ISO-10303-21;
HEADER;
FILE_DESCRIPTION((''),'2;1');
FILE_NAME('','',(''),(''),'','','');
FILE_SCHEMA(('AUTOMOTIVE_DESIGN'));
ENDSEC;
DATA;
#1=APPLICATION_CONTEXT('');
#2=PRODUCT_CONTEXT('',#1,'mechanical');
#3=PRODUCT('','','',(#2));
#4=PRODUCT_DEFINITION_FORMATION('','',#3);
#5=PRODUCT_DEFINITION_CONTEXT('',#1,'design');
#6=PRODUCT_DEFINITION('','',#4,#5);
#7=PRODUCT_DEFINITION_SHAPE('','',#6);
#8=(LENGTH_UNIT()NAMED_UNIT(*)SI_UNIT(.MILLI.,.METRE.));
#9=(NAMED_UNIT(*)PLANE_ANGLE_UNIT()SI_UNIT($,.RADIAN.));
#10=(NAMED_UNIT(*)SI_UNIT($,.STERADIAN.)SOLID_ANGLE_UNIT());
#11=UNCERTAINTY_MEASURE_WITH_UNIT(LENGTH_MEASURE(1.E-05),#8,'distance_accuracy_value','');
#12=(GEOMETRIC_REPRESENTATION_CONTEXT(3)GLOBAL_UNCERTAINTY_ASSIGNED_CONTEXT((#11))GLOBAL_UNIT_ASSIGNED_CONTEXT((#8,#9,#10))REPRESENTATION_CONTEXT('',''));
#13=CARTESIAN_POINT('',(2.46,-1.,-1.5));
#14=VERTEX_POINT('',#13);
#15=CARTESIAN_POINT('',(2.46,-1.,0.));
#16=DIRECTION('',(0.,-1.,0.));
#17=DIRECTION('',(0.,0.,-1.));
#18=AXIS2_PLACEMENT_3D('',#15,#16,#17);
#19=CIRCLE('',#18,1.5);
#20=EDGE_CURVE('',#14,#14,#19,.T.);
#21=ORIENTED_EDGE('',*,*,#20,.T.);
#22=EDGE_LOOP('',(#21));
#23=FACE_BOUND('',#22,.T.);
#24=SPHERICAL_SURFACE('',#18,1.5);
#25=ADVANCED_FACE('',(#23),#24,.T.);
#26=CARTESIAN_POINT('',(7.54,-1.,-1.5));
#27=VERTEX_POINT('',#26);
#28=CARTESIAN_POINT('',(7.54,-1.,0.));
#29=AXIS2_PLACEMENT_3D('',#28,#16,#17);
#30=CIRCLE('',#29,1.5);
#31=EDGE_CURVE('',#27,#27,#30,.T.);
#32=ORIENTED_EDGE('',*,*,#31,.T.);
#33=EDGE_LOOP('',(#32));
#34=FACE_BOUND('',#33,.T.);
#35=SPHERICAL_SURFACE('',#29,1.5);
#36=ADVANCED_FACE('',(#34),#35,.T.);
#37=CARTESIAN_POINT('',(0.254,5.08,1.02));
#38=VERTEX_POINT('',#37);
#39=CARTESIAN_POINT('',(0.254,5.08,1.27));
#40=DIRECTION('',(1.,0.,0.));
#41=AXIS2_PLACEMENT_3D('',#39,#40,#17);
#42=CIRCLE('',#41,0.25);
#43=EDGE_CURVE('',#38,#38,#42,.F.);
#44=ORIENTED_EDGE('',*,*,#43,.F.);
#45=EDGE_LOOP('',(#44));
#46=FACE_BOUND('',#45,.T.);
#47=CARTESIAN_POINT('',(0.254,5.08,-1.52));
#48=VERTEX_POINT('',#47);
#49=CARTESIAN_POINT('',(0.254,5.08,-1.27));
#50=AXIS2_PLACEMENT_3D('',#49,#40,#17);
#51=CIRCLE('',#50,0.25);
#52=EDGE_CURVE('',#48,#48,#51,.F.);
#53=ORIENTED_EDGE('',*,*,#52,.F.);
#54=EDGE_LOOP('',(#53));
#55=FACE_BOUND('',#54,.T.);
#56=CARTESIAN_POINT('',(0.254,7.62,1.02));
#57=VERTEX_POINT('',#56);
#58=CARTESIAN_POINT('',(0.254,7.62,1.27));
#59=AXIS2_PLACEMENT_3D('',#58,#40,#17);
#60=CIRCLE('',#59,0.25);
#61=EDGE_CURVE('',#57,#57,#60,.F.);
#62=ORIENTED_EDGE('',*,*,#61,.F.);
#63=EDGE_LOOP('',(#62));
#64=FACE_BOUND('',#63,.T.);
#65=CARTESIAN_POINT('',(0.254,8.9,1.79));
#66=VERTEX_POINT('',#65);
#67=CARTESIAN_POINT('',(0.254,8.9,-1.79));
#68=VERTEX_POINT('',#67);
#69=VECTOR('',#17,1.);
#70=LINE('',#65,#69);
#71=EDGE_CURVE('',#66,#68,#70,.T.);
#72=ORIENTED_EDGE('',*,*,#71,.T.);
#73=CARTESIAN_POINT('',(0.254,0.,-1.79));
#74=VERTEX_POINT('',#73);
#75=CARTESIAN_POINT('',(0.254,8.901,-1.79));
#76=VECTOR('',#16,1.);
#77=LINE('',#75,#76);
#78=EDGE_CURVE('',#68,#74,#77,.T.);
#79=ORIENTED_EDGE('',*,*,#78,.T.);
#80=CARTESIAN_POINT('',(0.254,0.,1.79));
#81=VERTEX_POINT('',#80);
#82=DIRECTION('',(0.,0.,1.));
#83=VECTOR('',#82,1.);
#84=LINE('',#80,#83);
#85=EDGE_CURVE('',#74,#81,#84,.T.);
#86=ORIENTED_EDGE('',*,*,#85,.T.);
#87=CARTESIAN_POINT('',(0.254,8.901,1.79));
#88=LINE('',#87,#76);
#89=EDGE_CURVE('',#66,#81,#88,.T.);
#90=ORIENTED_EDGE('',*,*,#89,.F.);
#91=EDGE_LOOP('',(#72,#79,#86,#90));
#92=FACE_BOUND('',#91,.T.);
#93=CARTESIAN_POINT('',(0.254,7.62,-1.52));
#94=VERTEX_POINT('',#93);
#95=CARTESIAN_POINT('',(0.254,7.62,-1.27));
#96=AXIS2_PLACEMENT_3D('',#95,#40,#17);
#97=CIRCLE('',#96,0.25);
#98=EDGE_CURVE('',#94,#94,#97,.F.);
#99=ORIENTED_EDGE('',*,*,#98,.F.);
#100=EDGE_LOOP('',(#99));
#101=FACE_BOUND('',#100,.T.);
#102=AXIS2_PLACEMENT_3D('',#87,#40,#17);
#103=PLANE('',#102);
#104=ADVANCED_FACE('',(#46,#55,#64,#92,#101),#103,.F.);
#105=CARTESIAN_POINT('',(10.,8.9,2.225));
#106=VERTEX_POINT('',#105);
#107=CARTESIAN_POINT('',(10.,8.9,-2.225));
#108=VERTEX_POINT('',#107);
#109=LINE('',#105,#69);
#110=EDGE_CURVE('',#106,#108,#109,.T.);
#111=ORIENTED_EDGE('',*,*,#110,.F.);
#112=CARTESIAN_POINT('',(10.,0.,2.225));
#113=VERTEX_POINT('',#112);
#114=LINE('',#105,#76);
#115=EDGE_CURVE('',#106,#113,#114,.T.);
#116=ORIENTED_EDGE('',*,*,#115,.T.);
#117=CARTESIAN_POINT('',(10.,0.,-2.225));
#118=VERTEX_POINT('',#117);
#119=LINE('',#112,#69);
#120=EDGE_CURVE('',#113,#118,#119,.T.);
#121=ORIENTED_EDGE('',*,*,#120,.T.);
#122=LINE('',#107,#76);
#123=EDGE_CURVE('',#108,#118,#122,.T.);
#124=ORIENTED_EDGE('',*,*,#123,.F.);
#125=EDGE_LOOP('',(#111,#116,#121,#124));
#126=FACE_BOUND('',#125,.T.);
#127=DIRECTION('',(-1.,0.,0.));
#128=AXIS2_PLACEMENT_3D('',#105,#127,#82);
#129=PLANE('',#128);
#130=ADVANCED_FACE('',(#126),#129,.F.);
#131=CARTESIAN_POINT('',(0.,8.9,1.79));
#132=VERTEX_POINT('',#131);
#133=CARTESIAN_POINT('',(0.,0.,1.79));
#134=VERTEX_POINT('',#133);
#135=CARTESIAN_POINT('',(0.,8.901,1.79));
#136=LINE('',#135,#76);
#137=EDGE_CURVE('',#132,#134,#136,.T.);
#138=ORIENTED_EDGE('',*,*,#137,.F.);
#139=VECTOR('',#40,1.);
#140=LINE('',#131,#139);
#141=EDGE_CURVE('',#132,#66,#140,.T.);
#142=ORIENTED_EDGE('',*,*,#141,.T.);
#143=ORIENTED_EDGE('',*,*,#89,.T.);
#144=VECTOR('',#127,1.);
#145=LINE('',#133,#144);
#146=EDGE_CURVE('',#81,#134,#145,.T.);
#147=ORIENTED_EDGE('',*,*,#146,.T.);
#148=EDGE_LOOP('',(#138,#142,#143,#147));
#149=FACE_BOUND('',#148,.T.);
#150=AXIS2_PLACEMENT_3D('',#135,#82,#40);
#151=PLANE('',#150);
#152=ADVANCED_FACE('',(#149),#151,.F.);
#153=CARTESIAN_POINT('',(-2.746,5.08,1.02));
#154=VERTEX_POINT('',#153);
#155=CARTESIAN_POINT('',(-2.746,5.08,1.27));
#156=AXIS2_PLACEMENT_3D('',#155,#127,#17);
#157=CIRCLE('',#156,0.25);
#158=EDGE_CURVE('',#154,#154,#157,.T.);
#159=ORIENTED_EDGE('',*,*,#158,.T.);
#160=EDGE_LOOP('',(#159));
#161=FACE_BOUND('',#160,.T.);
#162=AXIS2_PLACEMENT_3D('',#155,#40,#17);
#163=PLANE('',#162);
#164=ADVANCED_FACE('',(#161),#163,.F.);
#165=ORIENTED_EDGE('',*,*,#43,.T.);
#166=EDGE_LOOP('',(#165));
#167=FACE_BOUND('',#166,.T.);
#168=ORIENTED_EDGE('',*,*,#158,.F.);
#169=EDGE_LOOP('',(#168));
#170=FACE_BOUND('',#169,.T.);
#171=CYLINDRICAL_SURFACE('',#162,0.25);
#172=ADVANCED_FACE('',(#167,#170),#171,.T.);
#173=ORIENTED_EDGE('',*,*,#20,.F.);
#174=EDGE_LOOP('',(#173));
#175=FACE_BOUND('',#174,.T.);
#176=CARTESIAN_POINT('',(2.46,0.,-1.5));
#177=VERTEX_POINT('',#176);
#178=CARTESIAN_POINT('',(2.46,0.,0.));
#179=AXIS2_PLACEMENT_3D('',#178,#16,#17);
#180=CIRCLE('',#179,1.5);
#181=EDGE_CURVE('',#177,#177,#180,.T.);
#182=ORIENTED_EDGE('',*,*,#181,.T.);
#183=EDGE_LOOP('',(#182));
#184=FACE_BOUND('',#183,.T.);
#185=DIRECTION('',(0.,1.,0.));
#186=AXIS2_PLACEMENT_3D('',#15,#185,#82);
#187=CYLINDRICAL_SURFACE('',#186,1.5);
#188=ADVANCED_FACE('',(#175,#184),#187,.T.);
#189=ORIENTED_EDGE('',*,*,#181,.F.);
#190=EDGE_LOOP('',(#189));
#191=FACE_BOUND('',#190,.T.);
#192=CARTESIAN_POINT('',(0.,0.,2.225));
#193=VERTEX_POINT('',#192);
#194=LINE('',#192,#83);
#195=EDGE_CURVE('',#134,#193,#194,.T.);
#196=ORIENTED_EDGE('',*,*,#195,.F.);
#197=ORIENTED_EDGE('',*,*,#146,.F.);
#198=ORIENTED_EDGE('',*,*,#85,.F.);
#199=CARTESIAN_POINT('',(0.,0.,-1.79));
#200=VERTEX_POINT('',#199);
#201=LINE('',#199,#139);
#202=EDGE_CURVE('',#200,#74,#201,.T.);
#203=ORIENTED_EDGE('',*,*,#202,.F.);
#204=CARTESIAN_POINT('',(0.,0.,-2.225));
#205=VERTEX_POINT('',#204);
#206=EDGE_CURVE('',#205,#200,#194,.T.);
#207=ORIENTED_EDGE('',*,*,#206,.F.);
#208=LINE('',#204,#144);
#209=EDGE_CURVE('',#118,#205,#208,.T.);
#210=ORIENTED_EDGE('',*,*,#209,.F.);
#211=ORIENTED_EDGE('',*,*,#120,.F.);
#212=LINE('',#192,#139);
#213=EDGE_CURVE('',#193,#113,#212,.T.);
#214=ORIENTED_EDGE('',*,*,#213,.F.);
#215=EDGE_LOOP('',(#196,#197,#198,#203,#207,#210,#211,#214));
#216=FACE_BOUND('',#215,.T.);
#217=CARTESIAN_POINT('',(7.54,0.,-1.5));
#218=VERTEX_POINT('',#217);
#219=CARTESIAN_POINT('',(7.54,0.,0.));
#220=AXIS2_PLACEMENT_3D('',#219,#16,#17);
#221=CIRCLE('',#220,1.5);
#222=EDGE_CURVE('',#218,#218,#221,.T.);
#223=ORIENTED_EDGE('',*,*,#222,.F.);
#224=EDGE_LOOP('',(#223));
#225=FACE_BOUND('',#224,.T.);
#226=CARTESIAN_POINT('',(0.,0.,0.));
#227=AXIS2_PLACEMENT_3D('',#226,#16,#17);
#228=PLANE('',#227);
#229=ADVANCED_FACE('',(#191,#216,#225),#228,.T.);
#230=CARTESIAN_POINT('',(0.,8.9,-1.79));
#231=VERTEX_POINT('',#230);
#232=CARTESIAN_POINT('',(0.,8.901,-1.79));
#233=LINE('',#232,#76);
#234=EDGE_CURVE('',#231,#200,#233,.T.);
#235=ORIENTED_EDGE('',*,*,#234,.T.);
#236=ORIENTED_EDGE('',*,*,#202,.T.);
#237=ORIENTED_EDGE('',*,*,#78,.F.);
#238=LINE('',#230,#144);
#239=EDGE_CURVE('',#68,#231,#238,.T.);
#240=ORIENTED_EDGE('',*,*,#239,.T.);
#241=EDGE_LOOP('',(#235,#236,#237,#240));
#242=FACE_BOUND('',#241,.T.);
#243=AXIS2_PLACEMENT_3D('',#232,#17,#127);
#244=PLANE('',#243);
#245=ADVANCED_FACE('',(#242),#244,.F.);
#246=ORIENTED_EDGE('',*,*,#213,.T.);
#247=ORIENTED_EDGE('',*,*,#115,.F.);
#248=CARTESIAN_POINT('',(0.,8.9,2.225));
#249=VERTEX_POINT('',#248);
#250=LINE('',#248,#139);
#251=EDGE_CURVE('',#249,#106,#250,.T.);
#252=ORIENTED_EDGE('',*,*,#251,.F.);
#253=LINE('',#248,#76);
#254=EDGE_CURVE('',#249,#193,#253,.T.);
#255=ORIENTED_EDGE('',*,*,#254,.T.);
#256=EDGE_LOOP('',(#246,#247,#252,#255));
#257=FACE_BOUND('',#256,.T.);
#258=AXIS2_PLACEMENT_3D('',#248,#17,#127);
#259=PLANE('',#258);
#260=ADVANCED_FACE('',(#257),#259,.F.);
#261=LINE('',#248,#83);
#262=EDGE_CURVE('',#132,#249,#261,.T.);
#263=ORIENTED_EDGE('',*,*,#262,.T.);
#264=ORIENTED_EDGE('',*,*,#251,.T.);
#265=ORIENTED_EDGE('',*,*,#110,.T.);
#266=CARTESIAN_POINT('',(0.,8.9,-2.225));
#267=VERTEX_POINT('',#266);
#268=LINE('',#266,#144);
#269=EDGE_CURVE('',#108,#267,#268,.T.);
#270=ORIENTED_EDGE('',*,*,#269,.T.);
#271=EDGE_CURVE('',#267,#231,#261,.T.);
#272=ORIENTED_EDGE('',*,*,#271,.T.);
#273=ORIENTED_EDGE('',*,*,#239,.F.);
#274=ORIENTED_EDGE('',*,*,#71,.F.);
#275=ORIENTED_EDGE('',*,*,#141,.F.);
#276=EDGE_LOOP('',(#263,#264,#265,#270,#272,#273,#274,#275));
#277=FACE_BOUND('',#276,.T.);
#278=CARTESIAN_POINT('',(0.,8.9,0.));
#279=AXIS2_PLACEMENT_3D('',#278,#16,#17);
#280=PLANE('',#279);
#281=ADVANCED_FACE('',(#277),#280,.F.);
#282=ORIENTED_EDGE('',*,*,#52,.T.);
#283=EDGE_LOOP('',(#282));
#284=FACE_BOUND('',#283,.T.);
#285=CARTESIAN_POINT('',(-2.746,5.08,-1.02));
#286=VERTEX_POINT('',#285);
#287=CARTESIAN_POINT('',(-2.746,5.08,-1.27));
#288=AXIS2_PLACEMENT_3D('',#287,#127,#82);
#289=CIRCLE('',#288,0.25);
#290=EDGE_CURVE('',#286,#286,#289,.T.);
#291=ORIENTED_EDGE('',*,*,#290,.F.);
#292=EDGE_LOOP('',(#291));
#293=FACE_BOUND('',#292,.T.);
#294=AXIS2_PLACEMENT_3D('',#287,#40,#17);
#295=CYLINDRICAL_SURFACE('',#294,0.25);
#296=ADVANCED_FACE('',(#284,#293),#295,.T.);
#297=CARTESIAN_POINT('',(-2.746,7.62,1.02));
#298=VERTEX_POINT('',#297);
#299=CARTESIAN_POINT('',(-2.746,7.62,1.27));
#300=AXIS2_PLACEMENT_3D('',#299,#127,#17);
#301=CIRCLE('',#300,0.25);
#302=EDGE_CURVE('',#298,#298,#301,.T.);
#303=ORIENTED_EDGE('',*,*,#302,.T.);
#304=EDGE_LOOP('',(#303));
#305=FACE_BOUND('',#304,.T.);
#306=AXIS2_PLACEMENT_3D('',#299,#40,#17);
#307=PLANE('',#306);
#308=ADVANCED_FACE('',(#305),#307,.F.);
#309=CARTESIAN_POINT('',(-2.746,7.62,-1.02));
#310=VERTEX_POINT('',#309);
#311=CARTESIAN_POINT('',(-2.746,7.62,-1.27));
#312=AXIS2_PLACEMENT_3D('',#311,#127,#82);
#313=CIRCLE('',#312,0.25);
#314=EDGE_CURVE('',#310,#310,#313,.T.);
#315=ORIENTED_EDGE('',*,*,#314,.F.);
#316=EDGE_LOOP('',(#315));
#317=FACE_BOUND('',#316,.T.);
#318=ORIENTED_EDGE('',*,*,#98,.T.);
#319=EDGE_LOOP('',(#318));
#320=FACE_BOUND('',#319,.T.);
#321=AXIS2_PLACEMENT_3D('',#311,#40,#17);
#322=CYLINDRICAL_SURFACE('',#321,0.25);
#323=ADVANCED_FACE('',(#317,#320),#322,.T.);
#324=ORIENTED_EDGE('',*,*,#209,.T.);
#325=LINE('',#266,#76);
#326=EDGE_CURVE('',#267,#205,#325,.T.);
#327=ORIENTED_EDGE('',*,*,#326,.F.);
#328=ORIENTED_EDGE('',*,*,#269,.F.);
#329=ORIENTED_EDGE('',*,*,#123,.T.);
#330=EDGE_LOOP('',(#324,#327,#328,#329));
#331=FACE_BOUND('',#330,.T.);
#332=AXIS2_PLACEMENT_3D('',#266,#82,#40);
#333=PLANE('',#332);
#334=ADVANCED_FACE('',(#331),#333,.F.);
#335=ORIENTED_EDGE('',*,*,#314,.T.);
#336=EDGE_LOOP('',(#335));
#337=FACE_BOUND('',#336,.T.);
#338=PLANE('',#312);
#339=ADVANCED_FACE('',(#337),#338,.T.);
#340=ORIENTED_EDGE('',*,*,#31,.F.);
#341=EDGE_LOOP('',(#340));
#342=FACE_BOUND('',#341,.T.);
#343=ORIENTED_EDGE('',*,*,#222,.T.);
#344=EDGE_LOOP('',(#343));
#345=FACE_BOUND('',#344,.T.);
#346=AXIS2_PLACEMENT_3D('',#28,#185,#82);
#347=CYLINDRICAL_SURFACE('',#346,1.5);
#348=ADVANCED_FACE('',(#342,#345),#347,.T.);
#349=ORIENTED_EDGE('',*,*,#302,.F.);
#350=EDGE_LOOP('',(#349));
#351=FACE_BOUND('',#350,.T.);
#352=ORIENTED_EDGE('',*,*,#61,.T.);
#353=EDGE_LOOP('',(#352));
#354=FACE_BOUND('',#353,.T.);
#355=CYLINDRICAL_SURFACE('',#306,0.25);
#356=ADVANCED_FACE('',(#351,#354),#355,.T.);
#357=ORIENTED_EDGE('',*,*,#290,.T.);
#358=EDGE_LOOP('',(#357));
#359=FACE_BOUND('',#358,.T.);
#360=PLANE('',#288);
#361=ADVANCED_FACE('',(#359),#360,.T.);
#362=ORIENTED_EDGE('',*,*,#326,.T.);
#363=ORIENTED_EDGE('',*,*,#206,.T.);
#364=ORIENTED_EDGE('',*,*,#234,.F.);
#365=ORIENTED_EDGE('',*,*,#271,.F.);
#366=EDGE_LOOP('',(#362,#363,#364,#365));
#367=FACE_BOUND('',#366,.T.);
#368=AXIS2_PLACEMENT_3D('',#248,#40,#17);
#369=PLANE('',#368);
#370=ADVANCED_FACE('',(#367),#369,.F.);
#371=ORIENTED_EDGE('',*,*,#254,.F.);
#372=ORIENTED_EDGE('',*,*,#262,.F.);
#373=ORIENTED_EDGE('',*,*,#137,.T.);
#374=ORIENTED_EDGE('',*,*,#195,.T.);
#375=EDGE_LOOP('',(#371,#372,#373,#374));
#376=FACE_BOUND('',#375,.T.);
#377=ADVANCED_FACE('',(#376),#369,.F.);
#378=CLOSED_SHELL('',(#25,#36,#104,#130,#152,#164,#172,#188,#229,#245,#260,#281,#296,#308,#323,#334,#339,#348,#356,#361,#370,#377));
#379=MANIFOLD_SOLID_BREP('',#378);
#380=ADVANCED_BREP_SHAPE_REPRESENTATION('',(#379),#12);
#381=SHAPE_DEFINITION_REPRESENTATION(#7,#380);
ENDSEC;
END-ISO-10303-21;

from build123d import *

# Parameters (mm, degrees)
SKETCH_1_W          = 10
SKETCH_1_H          = 4.45
EXTRUDE_1_DEPTH     = 8.9
SKETCH_2_R          = 1.5
EXTRUDE_2_DEPTH     = 1
CUT_EXTRUDE_1_REACH = 15.571
SKETCH_4_W          = 0.254
SKETCH_4_H          = 3.58
SKETCH_3_R          = 0.25
EXTRUDE_3_DEPTH     = 3


# Read off the part's stored shape, not the designer's step: 圆顶1, 圆顶2
with BuildPart() as part:
    # 草图1 → 凸台-拉伸1 (new body)
    with BuildSketch(Plane(origin=(0, 0, 0), x_dir=(1, 0, 0), z_dir=(0, 1, 0))):
        with Locations((5, 0)):
            Rectangle(SKETCH_1_W, SKETCH_1_H)
    extrude(amount=EXTRUDE_1_DEPTH)

    # 草图2 → 凸台-拉伸2 (add)
    with BuildSketch(Plane.XZ):
        with Locations(Location((7.54, 0, 0), (0, 0, 270))):
            Circle(SKETCH_2_R)
        with Locations(Location((2.46, 0, 0), (0, 0, 270))):
            Circle(SKETCH_2_R)
    extrude(amount=EXTRUDE_2_DEPTH)

    # 圆顶1 outline → 圆顶1 (revolve)
    with BuildSketch(Plane(origin=(7.54, 0, 0), x_dir=(1, 0, 0), z_dir=(0, 0, 1))):
        with BuildLine():
            Line((0, -0.999999998), (0, -2.5))
            ThreePointArc((0, -2.5), (1.060660172, -2.060660171), (1.5, -0.999999998))
            Line((1.5, -0.999999998), (0, -0.999999998))
        make_face()
    revolve(axis=Axis((7.54, 0, 0), (0, 1, 0)))

    # 圆顶2 outline → 圆顶2 (revolve)
    with BuildSketch(Plane(origin=(2.46, 0, 0), x_dir=(1, 0, 0), z_dir=(0, 0, 1))):
        with BuildLine():
            Line((0, -0.999999998), (0, -2.5))
            ThreePointArc((0, -2.5), (1.060660172, -2.060660171), (1.5, -0.999999998))
            Line((1.5, -0.999999998), (0, -0.999999998))
        make_face()
    revolve(axis=Axis((2.46, 0, 0), (0, 1, 0)))

    # 草图4 → 切除-拉伸1 (cut, up to next)
    with BuildSketch(Plane.XZ, mode=Mode.PRIVATE) as cut_extrude_1_sk1:
        with Locations((0.127, 0)):
            Rectangle(SKETCH_4_W, SKETCH_4_H)
    cut_extrude_1_tool1 = extrude(cut_extrude_1_sk1.sketch, amount=-CUT_EXTRUDE_1_REACH, mode=Mode.PRIVATE) & part.part
    add(cut_extrude_1_tool1.solids().sort_by_distance((0.127, 0, 0))[0], mode=Mode.SUBTRACT)

    # 草图3 → 凸台-拉伸3 (add)
    with BuildSketch(Plane.ZY.offset(-0.254)):
        with Locations(Location((-1.27, 5.08, 0), (0, 0, 180))):
            Circle(SKETCH_3_R)
        with Locations(Location((-1.27, 7.62, 0), (0, 0, 180))):
            Circle(SKETCH_3_R)
        with Locations(Location((1.27, 7.62, 0), (0, 0, 180))):
            Circle(SKETCH_3_R)
        with Locations(Location((1.27, 5.08, 0), (0, 0, 180))):
            Circle(SKETCH_3_R)
    extrude(amount=EXTRUDE_3_DEPTH)


solid = part.part
